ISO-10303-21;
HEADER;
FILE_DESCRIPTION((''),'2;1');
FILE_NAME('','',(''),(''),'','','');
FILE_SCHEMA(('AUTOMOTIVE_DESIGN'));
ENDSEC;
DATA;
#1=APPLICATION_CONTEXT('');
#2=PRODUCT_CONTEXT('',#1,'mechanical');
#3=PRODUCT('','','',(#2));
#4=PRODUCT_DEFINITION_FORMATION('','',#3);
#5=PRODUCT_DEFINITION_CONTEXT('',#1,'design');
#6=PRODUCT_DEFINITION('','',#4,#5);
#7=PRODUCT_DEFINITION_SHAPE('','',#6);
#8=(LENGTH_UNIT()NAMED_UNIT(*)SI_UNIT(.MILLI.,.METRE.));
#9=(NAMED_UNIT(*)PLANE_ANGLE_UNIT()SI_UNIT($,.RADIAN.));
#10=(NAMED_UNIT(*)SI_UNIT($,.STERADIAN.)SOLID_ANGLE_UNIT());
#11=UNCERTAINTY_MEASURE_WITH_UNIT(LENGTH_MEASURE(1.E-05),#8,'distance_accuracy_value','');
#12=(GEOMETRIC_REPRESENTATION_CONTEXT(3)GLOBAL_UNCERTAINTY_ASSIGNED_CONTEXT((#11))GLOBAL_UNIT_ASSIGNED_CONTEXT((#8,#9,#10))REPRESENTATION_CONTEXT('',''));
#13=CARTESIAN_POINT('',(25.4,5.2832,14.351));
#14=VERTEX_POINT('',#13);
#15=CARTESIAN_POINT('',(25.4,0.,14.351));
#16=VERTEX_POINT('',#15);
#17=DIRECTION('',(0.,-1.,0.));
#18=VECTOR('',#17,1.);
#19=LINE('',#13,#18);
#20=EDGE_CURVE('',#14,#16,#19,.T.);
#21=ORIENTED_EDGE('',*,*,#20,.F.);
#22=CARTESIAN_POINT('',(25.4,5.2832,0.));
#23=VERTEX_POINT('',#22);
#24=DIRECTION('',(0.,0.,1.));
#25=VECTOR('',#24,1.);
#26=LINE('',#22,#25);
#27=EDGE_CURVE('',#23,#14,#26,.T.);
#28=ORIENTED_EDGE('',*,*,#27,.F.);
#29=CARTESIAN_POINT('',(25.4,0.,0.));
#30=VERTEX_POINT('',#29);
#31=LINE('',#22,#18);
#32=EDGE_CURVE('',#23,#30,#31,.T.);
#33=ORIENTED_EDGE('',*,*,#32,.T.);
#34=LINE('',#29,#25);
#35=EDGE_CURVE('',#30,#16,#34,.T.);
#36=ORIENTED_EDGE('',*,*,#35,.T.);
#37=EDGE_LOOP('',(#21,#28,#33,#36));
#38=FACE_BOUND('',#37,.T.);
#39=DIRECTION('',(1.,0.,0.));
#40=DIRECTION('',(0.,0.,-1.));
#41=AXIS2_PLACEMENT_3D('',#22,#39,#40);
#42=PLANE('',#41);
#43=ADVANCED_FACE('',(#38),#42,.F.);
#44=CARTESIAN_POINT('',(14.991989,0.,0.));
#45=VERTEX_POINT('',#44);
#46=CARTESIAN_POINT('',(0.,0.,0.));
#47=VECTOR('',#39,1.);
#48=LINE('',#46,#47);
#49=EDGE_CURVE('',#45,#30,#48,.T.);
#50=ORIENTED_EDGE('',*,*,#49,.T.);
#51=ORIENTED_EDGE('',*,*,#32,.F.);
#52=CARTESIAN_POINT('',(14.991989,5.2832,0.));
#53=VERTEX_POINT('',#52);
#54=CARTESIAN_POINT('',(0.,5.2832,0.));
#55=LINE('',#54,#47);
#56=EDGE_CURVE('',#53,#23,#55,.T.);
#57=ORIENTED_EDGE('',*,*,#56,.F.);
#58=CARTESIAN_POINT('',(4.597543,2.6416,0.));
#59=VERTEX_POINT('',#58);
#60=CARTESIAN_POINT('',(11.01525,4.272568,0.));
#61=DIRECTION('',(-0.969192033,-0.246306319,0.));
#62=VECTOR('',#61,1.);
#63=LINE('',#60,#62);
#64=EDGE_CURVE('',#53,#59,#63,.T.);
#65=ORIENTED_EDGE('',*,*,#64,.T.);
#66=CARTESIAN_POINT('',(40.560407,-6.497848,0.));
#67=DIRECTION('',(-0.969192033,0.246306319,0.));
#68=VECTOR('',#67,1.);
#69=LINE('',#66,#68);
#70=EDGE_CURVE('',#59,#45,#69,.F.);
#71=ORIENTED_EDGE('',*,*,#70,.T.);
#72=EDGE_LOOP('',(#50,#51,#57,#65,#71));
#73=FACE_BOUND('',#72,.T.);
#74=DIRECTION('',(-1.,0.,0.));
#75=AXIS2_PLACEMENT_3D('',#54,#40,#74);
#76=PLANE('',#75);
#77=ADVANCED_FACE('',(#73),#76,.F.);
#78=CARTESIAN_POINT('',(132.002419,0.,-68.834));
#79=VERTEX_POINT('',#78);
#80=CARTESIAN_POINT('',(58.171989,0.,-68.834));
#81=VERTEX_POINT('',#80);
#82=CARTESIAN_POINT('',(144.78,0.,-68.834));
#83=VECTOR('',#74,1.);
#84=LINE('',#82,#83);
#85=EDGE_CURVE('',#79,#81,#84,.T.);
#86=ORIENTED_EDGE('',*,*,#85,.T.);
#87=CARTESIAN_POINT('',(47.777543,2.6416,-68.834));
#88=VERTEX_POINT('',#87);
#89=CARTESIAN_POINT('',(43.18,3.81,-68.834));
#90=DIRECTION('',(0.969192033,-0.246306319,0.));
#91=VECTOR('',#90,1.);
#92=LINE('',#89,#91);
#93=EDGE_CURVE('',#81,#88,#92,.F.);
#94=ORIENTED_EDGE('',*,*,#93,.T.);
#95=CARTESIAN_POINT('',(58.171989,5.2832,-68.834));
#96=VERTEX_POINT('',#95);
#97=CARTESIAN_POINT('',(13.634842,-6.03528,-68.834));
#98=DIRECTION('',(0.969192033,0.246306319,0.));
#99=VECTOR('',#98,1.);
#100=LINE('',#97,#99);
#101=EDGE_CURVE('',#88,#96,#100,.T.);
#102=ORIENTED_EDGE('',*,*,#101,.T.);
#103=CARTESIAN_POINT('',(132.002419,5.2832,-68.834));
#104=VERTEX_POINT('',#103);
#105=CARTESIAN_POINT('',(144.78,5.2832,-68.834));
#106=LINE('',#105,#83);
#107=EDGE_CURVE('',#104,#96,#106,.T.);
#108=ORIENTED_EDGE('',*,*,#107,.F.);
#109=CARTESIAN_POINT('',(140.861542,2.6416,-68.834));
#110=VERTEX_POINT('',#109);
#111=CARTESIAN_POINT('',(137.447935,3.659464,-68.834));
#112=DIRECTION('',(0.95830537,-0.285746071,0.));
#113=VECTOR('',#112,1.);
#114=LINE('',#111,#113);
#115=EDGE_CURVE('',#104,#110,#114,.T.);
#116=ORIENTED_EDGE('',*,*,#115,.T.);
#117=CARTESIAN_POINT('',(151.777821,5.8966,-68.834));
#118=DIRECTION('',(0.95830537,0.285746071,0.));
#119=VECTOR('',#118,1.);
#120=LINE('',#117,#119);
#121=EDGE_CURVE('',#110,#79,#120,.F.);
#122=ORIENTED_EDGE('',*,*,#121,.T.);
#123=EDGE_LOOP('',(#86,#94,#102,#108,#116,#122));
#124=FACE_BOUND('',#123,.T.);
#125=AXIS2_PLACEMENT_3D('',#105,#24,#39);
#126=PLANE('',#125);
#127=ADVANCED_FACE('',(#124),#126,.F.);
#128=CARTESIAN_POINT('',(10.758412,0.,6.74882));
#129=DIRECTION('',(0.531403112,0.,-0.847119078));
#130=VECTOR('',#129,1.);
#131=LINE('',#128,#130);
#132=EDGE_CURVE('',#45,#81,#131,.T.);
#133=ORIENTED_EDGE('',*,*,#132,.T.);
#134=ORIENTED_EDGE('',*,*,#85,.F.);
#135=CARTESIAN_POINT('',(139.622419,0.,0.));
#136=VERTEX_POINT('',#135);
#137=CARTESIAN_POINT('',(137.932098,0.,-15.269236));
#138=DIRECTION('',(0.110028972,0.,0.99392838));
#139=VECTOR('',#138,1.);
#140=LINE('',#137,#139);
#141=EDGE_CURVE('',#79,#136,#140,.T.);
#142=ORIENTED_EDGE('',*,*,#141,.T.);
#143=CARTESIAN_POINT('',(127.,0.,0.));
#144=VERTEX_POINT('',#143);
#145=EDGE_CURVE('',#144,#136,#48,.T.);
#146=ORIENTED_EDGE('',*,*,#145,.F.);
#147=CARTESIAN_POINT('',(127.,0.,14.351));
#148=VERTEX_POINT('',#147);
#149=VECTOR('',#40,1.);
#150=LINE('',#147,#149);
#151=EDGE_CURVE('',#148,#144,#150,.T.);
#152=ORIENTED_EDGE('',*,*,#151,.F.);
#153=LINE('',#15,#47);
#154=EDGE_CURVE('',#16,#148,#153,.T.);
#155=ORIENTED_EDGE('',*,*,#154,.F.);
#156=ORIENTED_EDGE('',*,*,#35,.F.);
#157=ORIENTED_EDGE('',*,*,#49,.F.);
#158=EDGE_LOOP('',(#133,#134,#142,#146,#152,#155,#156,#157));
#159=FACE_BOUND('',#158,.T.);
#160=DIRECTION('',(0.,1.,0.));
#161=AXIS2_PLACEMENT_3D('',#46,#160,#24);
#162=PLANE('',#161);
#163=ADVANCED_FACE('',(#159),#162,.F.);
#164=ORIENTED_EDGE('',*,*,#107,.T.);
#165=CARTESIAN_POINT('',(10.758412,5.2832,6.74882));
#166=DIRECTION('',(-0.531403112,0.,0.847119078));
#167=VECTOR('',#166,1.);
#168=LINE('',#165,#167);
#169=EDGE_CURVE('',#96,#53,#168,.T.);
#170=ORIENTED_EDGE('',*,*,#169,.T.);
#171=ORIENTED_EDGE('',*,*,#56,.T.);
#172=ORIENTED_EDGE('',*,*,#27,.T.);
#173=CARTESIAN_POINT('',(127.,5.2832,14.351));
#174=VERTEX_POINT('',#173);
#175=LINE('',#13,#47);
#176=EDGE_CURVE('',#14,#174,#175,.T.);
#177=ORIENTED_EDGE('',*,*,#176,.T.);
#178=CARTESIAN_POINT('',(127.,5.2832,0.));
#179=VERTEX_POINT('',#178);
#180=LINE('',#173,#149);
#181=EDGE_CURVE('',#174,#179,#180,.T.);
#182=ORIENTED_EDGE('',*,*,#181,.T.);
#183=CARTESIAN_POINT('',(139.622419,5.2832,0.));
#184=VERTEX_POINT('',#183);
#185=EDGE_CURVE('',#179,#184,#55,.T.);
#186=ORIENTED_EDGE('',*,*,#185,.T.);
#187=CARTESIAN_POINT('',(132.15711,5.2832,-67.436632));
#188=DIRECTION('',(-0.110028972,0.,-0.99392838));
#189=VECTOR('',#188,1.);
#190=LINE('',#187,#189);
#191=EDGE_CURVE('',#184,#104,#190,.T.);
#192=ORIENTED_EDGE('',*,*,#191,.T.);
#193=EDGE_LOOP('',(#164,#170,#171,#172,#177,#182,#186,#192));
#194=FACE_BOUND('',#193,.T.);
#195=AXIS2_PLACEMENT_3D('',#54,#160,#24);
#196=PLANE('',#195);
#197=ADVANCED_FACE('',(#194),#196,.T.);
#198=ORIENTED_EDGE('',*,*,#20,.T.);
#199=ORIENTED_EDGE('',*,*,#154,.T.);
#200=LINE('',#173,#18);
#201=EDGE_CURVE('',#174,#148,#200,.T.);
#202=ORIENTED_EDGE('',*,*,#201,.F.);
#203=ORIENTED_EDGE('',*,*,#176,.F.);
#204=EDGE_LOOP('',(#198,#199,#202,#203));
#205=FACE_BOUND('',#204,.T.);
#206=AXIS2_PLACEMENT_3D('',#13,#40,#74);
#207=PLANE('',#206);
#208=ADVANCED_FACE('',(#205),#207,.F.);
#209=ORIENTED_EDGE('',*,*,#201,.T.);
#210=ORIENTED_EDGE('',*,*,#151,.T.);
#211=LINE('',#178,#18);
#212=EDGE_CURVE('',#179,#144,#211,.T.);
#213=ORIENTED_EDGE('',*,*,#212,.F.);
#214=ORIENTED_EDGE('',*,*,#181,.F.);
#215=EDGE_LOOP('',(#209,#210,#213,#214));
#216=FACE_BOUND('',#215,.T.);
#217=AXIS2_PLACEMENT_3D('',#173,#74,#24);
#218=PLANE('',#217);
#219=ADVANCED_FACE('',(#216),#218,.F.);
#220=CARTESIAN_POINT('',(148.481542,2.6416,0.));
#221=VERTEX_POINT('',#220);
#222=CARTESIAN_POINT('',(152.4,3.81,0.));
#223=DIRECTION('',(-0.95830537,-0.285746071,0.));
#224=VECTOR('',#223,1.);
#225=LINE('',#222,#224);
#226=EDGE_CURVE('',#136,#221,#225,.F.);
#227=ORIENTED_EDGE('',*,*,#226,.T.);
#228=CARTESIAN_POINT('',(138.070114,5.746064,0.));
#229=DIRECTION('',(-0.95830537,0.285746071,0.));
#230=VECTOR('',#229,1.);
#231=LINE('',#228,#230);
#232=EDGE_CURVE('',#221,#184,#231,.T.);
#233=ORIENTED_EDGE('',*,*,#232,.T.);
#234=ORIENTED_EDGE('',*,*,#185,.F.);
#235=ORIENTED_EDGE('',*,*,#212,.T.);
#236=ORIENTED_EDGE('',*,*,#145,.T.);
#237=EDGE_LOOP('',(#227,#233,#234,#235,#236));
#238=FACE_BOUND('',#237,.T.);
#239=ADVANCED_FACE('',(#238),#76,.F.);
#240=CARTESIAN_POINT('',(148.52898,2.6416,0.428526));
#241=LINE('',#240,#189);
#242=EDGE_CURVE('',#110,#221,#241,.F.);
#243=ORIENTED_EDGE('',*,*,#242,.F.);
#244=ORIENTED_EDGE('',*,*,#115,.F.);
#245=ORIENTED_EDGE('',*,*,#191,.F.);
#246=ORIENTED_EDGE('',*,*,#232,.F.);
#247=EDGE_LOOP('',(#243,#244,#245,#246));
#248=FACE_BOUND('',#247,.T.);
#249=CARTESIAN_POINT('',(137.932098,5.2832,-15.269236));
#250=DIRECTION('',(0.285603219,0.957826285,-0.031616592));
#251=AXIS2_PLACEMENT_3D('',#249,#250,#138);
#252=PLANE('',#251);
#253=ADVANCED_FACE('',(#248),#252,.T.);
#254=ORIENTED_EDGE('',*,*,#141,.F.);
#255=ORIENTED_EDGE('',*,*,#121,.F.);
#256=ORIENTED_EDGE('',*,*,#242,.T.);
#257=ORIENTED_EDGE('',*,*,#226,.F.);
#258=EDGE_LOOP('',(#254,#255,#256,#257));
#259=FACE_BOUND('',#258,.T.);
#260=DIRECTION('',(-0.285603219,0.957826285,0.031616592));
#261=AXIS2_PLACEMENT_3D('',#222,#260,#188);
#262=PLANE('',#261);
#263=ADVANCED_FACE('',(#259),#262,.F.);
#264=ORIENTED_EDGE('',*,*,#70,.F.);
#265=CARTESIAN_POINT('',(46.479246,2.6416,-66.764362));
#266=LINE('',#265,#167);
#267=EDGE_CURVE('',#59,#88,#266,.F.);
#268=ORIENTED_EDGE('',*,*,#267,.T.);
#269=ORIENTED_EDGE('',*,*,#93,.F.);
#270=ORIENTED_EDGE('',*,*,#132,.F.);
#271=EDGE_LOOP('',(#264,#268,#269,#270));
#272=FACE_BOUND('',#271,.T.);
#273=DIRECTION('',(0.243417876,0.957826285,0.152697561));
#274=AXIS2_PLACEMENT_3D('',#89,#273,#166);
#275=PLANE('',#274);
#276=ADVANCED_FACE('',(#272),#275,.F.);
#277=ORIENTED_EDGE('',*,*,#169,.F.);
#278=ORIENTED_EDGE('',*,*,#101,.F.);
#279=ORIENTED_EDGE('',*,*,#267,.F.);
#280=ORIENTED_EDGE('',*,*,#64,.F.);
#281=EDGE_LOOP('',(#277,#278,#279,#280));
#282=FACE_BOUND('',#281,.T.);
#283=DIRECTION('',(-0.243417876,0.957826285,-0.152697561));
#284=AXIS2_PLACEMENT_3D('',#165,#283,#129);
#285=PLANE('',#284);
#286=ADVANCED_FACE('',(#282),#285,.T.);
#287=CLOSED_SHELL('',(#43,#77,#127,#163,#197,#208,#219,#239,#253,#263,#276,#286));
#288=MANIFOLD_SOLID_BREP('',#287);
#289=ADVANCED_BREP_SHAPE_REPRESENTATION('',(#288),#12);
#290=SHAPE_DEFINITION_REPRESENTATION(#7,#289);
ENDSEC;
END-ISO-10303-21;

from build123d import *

# Parameters (mm, degrees)
BOSS_EXTRUDE1_DEPTH = 5.2832
SKETCH2_W           = 101.6
SKETCH2_H           = 14.351
BOSS_EXTRUDE2_DEPTH = 5.2832
CHAMFER1_SIZE       = 12.7
CHAMFER1_SIZE_2     = 3.81
CHAMFER2_SIZE       = 12.7
CHAMFER2_SIZE2      = 3.81
CHAMFER3_SIZE       = 3.81
CHAMFER3_SIZE_2     = 12.7


with BuildPart() as part:
    # Sketch1 → Boss-Extrude1 (new body)
    with BuildSketch(Plane(origin=(0, 0, 0), x_dir=(1, 0, 0), z_dir=(0, 1, 0))):
        Polygon((0, 0), (152.4, 0), (144.78, 68.834), (43.18, 68.834), align=None)
    extrude(amount=BOSS_EXTRUDE1_DEPTH)

    # Sketch2 → Boss-Extrude2 (add)
    with BuildSketch(Plane(origin=(0, 0, 0), x_dir=(1, 0, 0), z_dir=(0, 1, 0))):
        with Locations((76.2, -7.1755)):
            Rectangle(SKETCH2_W, SKETCH2_H)
    extrude(amount=BOSS_EXTRUDE2_DEPTH)

    # Chamfer1
    # the kernel refuses this chamfer: 12.7, 3.81 mm, written as the material it takes off along each edge
    with BuildSketch(Plane(origin=(60.699541801, 0, -96.762210753), x_dir=(0.8470671798621036, -0.011069119507992343, 0.531370555633054), z_dir=(-0.5314031118215187, 0, 0.8471190782566561))) as chamfer1_piece_1:
        Polygon((CHAMFER1_SIZE * 0.99993873542, CHAMFER1_SIZE * 0.011069119508), (-CHAMFER1_SIZE_2 * 0.011069119508, CHAMFER1_SIZE_2 * 0.99993873542), (0, 0), align=None)
    extrude(amount=147.193499363, mode=Mode.SUBTRACT)
    with BuildSketch(Plane(origin=(60.699541801, 5.2832, -96.762210753), x_dir=(0.8470671798621036, 0.01106911950799233, 0.531370555633054), z_dir=(-0.5314031118215187, 0, 0.8471190782566561))) as chamfer1_piece_2:
        Polygon((CHAMFER1_SIZE * 0.99993873542, -CHAMFER1_SIZE * 0.011069119508), (-CHAMFER1_SIZE_2 * 0.011069119508, -CHAMFER1_SIZE_2 * 0.99993873542), (0, 0), align=None)
    extrude(amount=147.193499363, mode=Mode.SUBTRACT)

    # Chamfer2
    chamfer2_edges = [part.edges().sort_by_distance(p)[0] for p in [
        (148.59, 0, -34.417),
    ]]
    chamfer2_side = [part.faces().sort_by_distance(p)[0] for p in [
        (89.414881318, 0, -25.614395123),
    ]]
    chamfer(chamfer2_edges, length=CHAMFER2_SIZE, length2=CHAMFER2_SIZE2, reference=chamfer2_side[0])

    # Chamfer3
    # the kernel refuses this chamfer: 12.7, 3.81 mm, written as the material it takes off along each edge
    with BuildSketch(Plane(origin=(156.027485672, 5.2832, 32.768287237), x_dir=(0.12133658482182727, -0.9925205348140393, -0.013432094260718893), z_dir=(-0.1100289719975825, 0, -0.9939283803781614))) as chamfer3_piece_1:
        Polygon((CHAMFER3_SIZE * 0.992520534814, CHAMFER3_SIZE * 0.122077794756), (-CHAMFER3_SIZE_2 * 0.122077794756, CHAMFER3_SIZE_2 * 0.992520534814), (0, 0), align=None)
    extrude(amount=135.191405264, mode=Mode.SUBTRACT)


solid = part.part
